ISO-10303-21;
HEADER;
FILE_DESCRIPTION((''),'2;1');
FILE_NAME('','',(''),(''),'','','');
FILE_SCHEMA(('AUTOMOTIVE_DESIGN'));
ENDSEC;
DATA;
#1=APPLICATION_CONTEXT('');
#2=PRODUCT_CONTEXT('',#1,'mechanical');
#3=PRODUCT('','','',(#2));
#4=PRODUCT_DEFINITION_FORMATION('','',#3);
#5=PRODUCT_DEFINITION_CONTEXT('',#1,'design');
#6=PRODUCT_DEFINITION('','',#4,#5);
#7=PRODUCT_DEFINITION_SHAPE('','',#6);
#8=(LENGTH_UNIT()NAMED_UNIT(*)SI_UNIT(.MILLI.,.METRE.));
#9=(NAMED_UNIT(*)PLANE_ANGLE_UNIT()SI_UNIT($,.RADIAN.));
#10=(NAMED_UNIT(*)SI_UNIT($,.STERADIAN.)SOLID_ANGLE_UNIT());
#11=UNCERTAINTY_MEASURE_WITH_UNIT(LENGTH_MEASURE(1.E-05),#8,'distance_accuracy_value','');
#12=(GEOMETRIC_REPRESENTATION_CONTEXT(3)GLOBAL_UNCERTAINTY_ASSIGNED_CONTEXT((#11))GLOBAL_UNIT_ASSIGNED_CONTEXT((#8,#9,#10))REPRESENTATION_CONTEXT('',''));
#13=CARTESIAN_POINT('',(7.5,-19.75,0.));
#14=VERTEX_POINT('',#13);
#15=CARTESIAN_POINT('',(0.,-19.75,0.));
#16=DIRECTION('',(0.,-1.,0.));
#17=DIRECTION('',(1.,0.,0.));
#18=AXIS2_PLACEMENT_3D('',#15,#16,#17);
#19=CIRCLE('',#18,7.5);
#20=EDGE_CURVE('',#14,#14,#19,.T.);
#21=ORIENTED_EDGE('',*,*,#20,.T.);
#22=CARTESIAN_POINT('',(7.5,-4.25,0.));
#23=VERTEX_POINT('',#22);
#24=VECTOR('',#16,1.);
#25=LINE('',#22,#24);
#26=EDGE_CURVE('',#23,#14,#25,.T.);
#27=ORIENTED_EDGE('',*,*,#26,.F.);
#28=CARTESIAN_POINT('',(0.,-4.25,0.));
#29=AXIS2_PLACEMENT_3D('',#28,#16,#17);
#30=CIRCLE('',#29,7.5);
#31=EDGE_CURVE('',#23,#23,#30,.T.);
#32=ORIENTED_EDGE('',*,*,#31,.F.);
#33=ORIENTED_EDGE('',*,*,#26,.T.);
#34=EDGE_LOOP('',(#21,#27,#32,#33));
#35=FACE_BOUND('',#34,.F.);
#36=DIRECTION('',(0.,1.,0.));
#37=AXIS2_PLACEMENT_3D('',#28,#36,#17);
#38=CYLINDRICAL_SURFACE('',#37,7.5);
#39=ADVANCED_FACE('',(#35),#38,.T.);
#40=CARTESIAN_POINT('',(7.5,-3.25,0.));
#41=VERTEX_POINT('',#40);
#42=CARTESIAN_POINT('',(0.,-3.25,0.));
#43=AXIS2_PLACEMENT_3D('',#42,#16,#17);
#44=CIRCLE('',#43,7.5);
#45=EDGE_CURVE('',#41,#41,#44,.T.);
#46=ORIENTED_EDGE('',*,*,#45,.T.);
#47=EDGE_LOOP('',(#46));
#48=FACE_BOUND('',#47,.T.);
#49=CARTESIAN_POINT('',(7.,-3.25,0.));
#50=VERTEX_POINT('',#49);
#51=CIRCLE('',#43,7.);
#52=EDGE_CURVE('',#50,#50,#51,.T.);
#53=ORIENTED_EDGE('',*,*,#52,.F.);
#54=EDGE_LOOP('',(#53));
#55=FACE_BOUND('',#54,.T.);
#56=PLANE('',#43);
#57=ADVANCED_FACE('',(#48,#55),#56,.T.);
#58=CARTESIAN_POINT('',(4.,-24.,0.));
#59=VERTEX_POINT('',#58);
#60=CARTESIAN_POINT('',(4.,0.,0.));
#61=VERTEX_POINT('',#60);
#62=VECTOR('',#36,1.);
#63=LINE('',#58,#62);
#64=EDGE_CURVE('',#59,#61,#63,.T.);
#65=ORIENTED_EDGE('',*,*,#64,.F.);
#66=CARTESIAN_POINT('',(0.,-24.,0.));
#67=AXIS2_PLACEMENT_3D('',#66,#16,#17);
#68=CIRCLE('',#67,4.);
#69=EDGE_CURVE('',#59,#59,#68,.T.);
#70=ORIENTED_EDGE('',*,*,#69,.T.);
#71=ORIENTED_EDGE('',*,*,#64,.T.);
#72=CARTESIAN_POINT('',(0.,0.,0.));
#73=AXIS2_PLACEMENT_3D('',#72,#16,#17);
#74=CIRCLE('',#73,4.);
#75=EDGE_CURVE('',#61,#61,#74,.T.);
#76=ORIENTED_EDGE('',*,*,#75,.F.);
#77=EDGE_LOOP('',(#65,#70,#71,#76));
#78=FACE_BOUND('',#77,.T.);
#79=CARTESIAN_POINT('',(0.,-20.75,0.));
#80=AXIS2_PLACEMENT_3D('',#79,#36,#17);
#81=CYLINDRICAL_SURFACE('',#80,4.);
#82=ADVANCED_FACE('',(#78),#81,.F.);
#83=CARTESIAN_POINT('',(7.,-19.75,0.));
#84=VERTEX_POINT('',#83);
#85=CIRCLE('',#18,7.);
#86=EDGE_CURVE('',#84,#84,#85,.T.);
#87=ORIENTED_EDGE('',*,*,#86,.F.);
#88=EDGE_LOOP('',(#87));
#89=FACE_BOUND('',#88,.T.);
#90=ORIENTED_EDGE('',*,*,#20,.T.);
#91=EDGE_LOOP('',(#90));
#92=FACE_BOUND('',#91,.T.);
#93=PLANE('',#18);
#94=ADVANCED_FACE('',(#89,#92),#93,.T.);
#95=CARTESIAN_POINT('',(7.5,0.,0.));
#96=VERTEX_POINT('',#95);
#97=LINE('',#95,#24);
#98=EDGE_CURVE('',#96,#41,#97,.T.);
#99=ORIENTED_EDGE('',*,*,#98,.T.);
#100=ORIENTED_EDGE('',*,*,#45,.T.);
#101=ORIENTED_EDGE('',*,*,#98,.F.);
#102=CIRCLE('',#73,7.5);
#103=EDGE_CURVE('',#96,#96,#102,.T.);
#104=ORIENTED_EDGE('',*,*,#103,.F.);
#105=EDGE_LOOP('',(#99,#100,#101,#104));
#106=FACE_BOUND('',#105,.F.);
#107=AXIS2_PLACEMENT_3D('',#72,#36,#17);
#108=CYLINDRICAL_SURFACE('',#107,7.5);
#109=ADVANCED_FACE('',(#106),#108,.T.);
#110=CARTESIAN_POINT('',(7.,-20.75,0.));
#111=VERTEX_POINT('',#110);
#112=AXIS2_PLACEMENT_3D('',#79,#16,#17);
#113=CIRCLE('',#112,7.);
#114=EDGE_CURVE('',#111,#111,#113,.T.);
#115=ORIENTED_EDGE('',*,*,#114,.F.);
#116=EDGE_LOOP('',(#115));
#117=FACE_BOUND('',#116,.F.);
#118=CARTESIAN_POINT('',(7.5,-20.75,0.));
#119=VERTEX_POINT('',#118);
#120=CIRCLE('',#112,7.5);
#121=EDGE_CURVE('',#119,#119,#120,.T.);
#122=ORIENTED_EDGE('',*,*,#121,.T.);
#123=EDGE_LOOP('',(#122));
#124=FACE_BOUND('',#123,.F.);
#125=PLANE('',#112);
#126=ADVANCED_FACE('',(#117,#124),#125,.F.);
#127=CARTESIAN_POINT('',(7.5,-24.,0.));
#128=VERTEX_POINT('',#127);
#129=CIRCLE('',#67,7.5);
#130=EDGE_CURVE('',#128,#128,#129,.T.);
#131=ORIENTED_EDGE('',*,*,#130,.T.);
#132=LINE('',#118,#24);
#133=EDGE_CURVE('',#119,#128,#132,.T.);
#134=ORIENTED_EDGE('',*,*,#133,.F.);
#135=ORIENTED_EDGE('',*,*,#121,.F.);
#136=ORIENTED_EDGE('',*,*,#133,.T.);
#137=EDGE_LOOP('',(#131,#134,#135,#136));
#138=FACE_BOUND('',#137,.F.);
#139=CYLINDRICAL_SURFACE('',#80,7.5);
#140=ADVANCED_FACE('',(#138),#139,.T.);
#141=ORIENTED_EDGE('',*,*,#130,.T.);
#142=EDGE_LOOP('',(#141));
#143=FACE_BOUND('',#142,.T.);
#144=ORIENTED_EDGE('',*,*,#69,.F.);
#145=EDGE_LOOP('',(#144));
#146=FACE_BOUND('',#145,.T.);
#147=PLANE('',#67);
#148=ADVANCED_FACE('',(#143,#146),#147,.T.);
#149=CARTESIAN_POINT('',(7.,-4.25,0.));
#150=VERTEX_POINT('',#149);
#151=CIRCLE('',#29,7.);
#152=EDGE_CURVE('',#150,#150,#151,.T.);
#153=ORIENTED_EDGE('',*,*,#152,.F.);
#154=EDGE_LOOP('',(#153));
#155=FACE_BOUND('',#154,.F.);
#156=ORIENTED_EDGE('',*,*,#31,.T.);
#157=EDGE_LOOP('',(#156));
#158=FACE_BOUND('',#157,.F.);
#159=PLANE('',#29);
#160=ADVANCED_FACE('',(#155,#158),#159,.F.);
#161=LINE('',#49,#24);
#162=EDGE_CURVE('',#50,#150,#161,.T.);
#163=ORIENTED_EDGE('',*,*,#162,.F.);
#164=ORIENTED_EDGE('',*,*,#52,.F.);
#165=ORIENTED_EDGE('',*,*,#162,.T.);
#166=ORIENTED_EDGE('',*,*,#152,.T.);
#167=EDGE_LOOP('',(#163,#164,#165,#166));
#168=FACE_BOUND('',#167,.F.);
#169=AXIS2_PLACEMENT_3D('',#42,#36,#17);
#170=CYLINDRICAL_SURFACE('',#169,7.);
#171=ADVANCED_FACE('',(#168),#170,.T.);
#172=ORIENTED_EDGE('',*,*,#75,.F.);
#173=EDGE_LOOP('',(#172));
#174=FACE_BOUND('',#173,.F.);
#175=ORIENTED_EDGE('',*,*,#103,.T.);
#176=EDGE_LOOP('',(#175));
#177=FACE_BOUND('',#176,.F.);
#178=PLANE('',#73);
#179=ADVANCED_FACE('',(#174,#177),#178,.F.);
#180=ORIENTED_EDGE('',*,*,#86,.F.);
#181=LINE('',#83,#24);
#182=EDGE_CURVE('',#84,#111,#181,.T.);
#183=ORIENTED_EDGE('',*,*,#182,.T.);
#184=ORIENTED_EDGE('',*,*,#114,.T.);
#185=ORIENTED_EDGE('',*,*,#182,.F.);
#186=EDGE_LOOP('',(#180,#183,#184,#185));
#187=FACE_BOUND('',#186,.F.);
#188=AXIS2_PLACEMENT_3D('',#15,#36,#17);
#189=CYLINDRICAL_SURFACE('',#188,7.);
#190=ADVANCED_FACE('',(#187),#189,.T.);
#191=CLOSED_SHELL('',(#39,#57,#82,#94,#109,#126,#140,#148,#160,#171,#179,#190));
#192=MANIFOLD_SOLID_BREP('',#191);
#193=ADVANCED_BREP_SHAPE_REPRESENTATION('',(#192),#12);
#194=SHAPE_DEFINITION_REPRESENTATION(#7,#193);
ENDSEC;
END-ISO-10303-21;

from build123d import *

# Parameters (mm, degrees)
F0_R     = 7.5
F0_R_2   = 4
F1_DEPTH = 3.25
F2_R     = 7
F2_R_2   = 4
F3_DEPTH = 1
F4_R     = 7.5
F4_R_2   = 7
F4_R_3   = 4
F5_DEPTH = 15.5
F6_R     = 7
F6_R_2   = 4
F7_DEPTH = 1
F8_R     = 7.5
F8_R_2   = 7
F8_R_3   = 4
F9_DEPTH = 3.25


# Not quite as in the source:
# - a feature names something its author has since deleted; it is built from what else it names


with BuildPart() as f1:
    # F0 (on Front) → F1 (new body)
    with BuildSketch(Plane.XZ):
        Circle(F0_R)
        Circle(F0_R_2, mode=Mode.SUBTRACT)
    extrude(amount=F1_DEPTH)

    # F2 (on face) → F3 (join)
    with BuildSketch(Plane.XZ.offset(3.25)):
        Circle(F2_R)
        Circle(F2_R_2, mode=Mode.SUBTRACT)
    extrude(amount=F3_DEPTH)

    # F4 (on face) → F5 (join)
    with BuildSketch(Plane.XZ.offset(4.25)):
        Circle(F4_R)
        Circle(F4_R_2, mode=Mode.SUBTRACT)
        Circle(F4_R_2)
        Circle(F4_R_3, mode=Mode.SUBTRACT)
    extrude(amount=F5_DEPTH)

    # F6 (on face) → F7 (join)
    with BuildSketch(Plane.XZ.offset(19.75)):
        Circle(F6_R)
        Circle(F6_R_2, mode=Mode.SUBTRACT)
    extrude(amount=F7_DEPTH)

    # F8 (on face) → F9 (join)
    with BuildSketch(Plane.XZ.offset(20.75)):
        Circle(F8_R)
        Circle(F8_R_2, mode=Mode.SUBTRACT)
        Circle(F8_R_2)
        Circle(F8_R_3, mode=Mode.SUBTRACT)
    extrude(amount=F9_DEPTH)


solid = f1.part
